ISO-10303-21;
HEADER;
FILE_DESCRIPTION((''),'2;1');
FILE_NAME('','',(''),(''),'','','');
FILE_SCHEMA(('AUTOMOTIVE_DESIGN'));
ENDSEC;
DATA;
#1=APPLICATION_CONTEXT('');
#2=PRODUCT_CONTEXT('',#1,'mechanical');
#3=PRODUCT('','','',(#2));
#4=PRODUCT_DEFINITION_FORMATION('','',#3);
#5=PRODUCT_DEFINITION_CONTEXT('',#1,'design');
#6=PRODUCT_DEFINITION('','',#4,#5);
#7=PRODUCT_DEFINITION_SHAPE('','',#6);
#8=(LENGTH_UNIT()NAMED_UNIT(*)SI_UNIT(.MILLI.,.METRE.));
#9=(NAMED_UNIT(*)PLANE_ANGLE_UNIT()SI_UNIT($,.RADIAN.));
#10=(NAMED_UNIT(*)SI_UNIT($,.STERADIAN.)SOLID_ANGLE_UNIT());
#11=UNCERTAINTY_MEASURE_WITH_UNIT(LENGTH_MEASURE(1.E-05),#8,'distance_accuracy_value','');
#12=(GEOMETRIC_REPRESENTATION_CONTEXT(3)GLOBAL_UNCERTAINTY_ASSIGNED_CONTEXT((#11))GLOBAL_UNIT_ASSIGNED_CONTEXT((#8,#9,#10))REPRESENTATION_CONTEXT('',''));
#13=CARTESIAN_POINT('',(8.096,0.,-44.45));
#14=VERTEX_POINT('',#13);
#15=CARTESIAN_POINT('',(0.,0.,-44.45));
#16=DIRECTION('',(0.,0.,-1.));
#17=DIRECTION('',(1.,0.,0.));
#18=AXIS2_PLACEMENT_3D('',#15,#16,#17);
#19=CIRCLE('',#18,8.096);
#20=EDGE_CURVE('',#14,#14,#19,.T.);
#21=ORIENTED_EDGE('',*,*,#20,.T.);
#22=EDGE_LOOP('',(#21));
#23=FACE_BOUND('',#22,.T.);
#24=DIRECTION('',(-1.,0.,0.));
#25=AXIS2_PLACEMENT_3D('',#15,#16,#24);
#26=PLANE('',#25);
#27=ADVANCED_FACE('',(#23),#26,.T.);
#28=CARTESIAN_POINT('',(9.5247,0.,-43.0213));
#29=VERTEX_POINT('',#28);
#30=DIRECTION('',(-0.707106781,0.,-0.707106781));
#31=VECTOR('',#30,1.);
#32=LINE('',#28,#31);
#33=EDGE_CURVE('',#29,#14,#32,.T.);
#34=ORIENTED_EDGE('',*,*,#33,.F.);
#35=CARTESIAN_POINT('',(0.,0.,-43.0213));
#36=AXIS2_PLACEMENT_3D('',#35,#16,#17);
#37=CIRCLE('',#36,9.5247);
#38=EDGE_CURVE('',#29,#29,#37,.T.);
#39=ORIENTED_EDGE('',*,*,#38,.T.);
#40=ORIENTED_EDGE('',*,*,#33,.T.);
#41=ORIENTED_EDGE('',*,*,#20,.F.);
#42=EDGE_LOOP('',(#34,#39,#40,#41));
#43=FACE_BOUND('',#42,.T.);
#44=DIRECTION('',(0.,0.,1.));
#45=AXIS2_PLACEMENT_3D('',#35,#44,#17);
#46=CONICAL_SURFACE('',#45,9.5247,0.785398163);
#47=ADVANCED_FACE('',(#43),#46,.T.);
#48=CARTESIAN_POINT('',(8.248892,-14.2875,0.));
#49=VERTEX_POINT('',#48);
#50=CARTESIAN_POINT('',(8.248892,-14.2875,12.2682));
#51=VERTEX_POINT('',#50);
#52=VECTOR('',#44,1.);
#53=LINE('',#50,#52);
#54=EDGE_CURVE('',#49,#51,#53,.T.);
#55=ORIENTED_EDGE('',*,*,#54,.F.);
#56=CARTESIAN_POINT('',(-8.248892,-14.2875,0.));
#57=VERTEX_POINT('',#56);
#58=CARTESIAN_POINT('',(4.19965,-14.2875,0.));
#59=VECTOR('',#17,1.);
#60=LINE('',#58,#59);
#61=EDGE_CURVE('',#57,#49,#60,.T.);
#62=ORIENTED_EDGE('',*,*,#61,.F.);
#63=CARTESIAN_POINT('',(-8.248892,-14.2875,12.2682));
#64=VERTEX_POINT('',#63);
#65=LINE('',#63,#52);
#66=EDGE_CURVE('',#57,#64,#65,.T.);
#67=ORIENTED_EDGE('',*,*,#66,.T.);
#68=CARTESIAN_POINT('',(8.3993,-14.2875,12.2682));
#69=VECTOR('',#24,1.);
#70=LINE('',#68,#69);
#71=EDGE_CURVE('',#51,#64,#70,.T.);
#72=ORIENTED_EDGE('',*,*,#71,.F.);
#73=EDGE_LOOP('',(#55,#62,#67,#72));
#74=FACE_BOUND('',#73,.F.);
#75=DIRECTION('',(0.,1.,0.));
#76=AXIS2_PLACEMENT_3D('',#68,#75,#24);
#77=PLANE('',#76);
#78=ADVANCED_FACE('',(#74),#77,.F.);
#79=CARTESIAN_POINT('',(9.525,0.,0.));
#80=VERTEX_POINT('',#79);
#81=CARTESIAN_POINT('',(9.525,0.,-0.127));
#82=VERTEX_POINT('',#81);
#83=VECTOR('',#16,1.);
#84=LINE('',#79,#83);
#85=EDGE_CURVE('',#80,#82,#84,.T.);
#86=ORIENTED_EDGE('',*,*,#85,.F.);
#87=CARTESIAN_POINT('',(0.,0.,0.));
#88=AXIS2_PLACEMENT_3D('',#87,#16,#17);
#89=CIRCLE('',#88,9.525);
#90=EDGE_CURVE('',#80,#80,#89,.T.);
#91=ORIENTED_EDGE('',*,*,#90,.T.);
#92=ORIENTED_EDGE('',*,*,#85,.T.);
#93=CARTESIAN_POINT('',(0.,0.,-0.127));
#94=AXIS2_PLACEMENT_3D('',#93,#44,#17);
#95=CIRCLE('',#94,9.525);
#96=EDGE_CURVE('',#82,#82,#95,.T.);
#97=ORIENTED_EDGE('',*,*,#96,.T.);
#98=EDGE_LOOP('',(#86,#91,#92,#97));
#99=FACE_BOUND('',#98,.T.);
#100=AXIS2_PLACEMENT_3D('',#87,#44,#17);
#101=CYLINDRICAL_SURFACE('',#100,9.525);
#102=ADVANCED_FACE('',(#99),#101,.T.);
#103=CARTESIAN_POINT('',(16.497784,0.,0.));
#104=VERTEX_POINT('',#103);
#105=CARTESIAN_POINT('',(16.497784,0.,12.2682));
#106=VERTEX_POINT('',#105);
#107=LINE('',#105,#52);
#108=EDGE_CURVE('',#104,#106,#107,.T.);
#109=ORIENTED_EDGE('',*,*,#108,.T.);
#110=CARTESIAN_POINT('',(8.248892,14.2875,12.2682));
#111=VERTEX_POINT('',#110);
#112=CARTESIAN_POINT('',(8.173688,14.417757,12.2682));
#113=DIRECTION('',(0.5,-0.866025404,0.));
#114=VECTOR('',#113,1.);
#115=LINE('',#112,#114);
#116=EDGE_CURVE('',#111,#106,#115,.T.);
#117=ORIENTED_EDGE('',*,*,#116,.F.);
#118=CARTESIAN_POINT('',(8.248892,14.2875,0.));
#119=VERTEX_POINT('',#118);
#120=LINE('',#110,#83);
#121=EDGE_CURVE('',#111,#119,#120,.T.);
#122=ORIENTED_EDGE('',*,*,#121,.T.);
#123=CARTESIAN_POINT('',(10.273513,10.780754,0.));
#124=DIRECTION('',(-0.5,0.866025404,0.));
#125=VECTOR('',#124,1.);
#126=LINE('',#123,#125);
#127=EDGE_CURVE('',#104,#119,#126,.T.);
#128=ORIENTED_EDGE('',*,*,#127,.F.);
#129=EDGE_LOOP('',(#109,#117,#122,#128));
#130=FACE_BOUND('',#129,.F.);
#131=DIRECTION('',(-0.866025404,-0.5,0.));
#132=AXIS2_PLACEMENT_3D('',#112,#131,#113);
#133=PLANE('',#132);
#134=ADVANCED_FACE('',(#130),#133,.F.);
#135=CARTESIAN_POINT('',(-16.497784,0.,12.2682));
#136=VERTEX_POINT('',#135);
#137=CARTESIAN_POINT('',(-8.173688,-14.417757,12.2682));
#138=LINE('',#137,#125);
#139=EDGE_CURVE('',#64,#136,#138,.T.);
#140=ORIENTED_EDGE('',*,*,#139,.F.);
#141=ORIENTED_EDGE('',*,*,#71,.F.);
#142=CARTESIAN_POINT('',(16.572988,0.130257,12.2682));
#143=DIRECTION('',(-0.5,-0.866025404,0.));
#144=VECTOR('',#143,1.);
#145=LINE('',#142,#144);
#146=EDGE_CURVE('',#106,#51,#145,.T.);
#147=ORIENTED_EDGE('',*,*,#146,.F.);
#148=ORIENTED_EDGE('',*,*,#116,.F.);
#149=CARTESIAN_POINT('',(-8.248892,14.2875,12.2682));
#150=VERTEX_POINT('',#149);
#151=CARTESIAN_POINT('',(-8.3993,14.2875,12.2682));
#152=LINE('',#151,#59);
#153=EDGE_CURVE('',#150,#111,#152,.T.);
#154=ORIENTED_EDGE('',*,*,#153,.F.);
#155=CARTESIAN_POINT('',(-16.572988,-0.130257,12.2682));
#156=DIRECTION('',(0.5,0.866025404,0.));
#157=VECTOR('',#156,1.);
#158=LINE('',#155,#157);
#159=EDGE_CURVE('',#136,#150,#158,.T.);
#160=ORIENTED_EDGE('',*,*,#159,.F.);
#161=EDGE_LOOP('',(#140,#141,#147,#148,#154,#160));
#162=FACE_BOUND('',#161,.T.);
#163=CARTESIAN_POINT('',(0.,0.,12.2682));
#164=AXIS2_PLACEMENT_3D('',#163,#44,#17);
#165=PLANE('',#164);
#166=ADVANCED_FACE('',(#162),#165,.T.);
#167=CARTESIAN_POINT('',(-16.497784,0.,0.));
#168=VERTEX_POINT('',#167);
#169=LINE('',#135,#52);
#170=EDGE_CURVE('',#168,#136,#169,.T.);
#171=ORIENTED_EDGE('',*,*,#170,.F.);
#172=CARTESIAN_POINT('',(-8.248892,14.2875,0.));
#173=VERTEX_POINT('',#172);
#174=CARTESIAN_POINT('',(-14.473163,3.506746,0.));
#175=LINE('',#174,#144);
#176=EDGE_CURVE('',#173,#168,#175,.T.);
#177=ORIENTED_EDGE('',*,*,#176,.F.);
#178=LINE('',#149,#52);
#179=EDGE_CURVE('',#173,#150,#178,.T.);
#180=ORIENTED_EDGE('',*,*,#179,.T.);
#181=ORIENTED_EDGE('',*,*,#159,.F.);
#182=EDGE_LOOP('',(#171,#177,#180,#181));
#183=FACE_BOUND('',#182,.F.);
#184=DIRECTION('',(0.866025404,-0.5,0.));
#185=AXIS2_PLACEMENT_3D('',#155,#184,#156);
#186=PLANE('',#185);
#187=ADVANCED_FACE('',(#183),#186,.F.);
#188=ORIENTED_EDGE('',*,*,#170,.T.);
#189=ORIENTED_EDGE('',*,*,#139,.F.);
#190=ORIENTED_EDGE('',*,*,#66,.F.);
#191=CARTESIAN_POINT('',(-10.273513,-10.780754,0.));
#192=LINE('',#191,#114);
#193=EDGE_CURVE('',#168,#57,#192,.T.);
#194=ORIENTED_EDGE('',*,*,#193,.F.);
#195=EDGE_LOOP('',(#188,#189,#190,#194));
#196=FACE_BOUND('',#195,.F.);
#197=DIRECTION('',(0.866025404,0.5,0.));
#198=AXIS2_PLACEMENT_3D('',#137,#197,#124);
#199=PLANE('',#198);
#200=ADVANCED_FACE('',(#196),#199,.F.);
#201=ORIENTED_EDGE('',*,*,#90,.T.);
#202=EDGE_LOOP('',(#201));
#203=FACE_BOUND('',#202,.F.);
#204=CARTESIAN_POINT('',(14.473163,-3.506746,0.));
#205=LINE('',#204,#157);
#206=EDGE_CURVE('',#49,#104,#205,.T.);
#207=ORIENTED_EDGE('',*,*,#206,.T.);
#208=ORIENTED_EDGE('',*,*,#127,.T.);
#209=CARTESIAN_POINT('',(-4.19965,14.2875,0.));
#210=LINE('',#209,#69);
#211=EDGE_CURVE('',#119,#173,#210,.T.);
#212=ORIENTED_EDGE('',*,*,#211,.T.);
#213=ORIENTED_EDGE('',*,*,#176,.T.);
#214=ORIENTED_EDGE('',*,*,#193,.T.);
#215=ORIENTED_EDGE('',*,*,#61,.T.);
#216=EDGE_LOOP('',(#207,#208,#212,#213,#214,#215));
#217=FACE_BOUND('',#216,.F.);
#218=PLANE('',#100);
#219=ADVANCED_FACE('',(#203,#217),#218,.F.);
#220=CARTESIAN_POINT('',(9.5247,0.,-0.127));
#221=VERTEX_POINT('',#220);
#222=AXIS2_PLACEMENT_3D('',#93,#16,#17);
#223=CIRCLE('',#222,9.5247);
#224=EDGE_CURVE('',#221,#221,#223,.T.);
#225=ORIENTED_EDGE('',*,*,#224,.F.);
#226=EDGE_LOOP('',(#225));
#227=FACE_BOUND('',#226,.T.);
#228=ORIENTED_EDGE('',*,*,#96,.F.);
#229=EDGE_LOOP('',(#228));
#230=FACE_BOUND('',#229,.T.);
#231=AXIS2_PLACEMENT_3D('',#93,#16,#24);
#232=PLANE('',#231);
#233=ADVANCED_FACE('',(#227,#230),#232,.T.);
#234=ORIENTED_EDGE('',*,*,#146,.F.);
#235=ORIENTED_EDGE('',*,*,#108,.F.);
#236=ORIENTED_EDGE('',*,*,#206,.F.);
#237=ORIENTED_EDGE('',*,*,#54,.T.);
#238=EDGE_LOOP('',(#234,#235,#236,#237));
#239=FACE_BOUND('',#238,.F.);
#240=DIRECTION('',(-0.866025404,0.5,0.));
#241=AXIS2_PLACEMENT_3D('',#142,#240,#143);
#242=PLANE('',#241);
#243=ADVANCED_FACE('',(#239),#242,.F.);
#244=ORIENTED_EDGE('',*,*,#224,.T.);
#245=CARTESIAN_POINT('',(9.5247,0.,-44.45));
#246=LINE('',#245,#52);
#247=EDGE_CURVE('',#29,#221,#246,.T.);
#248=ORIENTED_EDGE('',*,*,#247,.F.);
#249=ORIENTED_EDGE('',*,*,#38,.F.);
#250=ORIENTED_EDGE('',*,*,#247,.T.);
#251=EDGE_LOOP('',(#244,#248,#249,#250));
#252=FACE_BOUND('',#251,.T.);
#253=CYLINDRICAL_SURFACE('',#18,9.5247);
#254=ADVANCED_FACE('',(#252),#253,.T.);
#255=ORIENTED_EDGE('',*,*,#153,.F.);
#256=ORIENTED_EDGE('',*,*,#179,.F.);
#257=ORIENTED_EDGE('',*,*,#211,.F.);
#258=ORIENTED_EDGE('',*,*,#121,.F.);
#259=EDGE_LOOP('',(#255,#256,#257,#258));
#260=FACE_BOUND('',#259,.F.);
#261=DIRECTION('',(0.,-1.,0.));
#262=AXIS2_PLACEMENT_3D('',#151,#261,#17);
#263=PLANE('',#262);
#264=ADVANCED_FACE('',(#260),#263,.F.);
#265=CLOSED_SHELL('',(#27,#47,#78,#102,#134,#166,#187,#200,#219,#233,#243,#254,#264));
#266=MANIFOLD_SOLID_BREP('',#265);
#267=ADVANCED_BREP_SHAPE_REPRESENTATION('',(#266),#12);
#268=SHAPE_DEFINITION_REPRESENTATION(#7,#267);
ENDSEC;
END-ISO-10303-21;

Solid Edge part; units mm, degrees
sketch "Sketch1" plane through (0, 0, 0) normal (0, 0, 1) x (1, 0, 0)
  circle A0 centre (0, 0) radius 16.5735
  dimension "D1" = 33.147
extrude "Protrusion1" add sketch "Sketch1" along normal blind 12.2682
sketch "Sketch2" plane through (0, 0, 0) normal (0, 0, -1) x (1, 0, 0)
  circle A0 centre (0, 0) radius 9.525
extrude "Protrusion2" add sketch "Sketch2" along normal blind 44.45
sketch "Sketch3" plane through (0, 0, -44.45) normal (0, 0, -1) x (1, 0, 0)
  circle A0 centre (0, 0) radius 9.5247
extrude "Cutout1" cut sketch "Sketch3" against normal blind 44.323 flip side to cut
chamfer "Chamfer_1" distance 1.4287 angle 45 1 edges at (-9.5247, 0, -44.45)
sketch "Sketch4" plane through (0, 0, 12.2682) normal (0, 0, 1) x (1, 0, 0)
  line L0 (-8.3993, 14.2875) -> (8.3993, 14.2875)
  dimension "D1" = 28.575
extrude "Cutout2" cut sketch "Sketch4" against normal up to next material side at (0, 14.3375, 12.2682)
pattern_circular "Pattern1" count 6 over 360 about axis through (0, 0, 12.2682) along (0, 0, 1) of "Cutout2"
properties part number "106007"
